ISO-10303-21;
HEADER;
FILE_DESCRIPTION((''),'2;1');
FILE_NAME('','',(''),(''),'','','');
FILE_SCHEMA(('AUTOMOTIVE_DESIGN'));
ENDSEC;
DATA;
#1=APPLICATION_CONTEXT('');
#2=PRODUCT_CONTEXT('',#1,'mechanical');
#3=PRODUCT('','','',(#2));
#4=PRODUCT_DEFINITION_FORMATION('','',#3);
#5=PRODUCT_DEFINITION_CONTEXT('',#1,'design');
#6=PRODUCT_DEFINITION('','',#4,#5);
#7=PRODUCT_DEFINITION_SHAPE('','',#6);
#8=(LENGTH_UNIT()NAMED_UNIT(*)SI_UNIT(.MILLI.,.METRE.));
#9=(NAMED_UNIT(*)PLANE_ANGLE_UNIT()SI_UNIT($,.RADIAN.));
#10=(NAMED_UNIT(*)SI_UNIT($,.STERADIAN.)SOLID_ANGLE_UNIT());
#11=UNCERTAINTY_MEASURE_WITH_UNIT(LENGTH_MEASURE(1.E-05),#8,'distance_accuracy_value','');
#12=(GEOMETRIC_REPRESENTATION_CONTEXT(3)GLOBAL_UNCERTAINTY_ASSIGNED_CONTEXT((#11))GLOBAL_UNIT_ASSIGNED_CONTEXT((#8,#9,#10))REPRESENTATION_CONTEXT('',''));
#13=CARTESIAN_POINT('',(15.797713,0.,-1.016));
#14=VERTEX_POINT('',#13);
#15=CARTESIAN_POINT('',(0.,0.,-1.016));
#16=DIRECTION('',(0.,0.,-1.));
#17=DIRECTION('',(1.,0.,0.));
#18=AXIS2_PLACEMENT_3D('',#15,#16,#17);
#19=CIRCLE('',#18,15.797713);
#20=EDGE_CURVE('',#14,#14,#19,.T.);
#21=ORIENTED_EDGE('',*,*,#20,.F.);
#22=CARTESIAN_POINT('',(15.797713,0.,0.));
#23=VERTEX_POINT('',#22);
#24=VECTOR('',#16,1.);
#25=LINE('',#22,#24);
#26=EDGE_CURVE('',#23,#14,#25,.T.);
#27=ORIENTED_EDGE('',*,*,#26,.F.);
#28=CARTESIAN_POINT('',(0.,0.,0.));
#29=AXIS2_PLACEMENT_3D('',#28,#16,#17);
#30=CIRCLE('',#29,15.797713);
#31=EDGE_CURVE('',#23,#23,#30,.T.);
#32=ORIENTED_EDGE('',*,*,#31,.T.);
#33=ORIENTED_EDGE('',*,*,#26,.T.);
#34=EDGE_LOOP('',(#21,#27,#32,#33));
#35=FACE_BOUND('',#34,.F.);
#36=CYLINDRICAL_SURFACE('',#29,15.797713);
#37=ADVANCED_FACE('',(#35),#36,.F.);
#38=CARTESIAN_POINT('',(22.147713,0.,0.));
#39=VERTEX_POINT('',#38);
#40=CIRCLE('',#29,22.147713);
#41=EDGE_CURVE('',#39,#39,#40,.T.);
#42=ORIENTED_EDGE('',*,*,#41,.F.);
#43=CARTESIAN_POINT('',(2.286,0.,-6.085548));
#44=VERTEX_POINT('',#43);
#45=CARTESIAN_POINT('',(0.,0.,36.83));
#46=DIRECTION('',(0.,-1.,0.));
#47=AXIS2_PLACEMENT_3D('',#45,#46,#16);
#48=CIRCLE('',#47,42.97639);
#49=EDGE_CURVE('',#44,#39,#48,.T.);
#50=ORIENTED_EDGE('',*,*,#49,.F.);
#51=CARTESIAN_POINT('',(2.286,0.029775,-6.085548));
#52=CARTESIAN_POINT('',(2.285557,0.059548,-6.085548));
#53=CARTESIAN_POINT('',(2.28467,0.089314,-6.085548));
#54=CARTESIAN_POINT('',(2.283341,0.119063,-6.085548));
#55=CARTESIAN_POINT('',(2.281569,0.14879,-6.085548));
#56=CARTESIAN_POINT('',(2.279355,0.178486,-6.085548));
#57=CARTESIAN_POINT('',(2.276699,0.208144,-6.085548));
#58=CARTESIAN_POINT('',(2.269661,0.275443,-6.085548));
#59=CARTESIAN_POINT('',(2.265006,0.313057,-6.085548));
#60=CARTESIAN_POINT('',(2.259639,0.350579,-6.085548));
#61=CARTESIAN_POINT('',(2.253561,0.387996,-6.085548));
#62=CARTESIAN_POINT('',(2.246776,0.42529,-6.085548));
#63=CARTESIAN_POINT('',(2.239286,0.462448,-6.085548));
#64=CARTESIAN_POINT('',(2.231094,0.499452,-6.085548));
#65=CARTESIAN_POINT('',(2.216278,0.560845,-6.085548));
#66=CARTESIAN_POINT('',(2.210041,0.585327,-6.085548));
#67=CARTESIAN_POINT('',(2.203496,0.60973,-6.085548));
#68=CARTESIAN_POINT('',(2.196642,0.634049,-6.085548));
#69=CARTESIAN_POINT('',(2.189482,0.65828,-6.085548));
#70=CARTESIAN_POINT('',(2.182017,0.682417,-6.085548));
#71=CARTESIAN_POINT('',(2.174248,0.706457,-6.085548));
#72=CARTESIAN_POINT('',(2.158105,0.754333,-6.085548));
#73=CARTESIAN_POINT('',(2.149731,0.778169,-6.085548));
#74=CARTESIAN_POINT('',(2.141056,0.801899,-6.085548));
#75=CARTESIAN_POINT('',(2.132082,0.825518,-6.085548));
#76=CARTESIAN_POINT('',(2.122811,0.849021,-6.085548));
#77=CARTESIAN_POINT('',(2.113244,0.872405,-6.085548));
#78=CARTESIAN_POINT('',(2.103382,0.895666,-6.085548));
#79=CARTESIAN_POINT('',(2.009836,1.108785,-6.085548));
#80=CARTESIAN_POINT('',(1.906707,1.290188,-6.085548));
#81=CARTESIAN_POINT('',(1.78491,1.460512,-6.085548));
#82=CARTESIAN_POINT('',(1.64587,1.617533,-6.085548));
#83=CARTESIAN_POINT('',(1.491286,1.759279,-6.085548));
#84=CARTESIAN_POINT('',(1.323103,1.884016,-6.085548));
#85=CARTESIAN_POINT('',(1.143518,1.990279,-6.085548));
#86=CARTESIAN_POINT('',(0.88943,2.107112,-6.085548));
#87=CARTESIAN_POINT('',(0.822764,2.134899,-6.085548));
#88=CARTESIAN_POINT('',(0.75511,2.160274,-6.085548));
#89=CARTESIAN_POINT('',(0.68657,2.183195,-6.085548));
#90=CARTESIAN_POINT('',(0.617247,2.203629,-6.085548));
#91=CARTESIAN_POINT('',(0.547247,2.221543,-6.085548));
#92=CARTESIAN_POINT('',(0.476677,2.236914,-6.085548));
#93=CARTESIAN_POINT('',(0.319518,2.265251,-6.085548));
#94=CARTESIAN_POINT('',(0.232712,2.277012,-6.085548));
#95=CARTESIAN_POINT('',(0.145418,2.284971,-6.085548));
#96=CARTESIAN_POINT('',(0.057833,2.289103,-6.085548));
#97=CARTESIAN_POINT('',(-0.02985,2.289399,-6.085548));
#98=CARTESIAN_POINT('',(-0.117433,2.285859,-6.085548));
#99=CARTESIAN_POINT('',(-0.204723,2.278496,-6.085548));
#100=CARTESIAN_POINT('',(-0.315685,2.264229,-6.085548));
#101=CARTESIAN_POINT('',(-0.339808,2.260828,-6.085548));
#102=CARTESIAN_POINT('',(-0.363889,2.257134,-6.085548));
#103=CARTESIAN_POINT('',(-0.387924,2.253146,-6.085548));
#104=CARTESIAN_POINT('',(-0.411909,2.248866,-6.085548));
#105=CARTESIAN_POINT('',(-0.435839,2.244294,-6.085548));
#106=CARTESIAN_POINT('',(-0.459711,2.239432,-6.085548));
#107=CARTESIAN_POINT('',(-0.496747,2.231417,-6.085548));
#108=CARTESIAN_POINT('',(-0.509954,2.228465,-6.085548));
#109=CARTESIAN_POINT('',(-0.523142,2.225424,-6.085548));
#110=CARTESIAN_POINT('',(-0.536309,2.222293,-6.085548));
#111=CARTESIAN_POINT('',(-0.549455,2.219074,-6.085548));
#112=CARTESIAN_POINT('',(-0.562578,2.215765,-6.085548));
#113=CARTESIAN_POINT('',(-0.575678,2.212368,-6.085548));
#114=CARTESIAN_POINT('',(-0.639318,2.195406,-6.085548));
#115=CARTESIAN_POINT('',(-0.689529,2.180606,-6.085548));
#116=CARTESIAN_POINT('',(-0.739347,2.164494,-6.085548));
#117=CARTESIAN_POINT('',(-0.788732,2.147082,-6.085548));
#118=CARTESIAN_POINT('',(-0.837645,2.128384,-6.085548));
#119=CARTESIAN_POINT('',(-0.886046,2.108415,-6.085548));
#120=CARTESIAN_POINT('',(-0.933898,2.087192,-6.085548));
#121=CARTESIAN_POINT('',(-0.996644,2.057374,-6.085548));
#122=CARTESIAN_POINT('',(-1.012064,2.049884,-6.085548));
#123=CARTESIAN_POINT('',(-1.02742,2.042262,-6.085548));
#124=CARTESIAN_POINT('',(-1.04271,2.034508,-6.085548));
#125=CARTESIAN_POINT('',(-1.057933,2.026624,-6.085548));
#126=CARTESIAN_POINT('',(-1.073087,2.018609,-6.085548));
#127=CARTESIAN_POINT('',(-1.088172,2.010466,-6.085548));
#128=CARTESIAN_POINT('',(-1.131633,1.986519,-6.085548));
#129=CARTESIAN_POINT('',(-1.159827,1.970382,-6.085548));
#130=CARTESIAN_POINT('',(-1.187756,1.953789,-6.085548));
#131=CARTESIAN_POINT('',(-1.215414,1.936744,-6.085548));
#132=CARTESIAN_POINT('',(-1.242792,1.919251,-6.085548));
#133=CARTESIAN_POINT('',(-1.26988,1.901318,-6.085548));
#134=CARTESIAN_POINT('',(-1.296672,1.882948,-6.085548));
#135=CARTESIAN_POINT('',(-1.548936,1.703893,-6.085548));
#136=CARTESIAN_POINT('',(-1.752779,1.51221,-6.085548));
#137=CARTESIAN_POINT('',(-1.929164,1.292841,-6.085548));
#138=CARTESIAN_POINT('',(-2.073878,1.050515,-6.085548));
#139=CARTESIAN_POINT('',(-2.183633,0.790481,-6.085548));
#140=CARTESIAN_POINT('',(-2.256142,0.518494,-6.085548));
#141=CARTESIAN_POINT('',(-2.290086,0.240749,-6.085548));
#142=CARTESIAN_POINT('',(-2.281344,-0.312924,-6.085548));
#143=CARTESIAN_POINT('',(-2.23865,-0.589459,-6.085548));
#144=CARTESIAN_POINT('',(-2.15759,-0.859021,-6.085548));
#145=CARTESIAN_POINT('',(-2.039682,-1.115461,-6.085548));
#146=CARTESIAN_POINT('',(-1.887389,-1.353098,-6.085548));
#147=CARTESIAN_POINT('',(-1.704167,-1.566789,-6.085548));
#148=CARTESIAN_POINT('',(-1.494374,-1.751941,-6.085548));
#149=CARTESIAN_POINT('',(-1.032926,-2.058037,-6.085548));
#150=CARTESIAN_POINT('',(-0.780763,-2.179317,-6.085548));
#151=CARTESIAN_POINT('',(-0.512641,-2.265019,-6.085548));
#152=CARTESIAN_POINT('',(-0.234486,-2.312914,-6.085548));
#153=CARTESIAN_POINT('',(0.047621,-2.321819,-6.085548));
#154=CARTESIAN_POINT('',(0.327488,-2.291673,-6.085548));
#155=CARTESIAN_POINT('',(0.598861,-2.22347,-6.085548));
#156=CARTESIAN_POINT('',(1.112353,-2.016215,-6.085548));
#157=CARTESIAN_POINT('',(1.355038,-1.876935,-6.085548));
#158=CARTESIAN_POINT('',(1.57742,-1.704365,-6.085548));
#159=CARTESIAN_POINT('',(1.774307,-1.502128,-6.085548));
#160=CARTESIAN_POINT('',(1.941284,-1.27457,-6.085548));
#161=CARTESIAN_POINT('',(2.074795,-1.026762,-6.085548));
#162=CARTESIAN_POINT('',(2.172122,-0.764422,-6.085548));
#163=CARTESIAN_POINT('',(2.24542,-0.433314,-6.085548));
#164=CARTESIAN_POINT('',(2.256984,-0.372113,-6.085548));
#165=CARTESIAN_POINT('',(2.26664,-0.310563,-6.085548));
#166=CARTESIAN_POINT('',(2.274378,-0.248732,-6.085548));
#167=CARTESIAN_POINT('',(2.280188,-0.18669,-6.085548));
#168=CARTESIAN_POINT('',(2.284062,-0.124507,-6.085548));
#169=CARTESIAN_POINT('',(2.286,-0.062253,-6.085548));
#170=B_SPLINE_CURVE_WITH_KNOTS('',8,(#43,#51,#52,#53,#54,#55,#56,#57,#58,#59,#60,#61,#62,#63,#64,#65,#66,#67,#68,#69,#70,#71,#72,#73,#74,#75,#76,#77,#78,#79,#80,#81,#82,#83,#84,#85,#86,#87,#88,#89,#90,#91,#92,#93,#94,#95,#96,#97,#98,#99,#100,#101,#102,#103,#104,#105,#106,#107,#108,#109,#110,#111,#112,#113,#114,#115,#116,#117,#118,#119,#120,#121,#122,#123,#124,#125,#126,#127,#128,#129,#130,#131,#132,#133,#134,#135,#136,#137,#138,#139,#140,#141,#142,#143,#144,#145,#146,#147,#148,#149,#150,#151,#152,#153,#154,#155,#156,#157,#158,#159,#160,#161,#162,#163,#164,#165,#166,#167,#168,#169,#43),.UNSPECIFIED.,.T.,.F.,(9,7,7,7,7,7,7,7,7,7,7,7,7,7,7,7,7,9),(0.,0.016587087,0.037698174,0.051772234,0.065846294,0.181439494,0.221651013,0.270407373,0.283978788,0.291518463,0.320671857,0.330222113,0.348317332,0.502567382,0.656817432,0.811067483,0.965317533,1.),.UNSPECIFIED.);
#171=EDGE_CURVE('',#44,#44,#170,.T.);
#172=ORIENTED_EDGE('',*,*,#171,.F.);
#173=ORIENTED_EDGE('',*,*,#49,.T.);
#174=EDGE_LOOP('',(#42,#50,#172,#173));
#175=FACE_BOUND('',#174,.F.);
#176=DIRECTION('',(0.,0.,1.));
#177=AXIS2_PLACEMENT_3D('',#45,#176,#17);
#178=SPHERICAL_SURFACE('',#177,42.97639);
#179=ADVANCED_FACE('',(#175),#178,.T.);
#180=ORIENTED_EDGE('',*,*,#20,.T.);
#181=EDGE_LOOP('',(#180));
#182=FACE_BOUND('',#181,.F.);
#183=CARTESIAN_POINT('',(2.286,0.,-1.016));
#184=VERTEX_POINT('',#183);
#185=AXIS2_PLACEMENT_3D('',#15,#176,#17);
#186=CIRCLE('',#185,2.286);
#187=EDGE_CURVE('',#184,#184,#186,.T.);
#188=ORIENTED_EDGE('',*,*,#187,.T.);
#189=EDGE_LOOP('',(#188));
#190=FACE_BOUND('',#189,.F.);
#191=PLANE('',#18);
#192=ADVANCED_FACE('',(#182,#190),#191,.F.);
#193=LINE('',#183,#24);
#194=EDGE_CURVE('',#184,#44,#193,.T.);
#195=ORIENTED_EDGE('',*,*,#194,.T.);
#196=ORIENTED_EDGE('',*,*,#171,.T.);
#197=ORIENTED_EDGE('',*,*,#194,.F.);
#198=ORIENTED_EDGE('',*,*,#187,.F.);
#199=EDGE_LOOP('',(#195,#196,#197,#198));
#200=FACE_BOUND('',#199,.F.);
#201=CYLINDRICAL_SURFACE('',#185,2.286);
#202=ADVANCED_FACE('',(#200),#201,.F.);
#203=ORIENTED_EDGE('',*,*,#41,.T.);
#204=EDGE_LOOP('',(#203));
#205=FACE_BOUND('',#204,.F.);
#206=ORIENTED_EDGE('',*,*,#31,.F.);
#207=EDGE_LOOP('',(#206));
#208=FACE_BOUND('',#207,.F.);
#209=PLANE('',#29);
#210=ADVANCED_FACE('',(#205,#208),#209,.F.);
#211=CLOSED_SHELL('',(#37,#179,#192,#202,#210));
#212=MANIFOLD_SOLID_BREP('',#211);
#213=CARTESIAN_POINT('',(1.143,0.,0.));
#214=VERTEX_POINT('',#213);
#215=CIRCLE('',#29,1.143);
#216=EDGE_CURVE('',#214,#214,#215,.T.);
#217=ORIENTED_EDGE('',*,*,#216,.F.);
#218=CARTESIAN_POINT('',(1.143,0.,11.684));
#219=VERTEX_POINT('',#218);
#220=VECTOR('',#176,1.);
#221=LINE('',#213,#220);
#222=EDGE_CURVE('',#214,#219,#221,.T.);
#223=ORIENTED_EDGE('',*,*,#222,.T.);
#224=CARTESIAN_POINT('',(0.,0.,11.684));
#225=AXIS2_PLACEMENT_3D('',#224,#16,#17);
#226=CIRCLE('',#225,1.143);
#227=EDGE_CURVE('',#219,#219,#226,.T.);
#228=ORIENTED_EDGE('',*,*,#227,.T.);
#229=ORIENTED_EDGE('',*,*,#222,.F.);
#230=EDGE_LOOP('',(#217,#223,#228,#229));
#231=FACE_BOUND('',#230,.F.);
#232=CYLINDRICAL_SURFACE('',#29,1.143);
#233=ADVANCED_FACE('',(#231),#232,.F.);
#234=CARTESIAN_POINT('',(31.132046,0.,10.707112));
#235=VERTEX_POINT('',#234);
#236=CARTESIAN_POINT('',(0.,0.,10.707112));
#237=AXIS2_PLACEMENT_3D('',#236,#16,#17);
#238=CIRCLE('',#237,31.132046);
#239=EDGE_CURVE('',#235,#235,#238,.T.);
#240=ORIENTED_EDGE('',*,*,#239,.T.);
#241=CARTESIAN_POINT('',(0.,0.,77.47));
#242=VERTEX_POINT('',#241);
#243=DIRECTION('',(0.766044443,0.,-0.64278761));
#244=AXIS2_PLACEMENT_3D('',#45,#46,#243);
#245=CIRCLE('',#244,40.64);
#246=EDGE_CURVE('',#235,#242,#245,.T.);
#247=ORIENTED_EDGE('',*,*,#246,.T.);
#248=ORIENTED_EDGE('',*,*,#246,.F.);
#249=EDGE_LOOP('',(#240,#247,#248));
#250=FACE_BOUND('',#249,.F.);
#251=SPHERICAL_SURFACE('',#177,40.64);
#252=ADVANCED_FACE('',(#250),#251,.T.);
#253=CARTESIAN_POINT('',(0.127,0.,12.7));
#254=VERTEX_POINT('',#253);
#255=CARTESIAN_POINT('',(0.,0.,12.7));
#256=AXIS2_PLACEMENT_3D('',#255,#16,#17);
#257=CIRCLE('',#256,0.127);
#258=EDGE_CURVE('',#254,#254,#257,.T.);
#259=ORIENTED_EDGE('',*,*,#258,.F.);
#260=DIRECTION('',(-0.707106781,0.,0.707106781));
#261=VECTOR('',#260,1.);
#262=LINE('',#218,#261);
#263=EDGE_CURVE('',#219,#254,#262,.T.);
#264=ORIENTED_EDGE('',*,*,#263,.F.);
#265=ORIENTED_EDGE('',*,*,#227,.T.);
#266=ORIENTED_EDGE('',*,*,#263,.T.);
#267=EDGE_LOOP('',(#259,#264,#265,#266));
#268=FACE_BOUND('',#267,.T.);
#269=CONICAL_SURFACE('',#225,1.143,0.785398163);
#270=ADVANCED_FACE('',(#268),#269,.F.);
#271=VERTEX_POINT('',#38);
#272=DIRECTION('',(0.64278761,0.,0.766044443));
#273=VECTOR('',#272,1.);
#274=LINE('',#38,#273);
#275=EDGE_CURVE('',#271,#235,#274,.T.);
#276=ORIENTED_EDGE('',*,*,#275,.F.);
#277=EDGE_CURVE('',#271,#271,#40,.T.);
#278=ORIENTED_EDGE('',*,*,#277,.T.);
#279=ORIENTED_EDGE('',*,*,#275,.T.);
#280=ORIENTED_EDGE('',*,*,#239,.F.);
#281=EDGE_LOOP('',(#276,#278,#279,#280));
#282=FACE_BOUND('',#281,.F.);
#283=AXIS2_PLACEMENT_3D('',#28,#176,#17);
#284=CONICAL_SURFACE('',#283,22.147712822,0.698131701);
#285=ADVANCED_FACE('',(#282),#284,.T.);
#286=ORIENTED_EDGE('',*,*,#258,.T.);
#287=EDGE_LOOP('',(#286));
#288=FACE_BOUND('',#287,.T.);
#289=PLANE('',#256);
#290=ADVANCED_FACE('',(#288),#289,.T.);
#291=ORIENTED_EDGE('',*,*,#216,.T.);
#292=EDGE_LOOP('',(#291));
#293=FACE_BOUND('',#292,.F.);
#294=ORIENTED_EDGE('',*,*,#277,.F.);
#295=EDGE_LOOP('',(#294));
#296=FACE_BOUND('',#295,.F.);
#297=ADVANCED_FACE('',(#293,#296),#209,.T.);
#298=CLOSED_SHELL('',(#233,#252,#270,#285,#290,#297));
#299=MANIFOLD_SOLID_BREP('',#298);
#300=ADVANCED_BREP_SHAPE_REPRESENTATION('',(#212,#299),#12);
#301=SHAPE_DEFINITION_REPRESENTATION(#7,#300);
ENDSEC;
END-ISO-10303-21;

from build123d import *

# Parameters (mm, degrees)
F2_R     = 1.143
F3_DEPTH = 12.7
F4_SIZE  = 1.016
F7_R     = 2.286
F8_DEPTH = 25.4


# Not quite as in the source:
# - a feature names something its author has since deleted; it is built from what else it names


with BuildPart() as f1:
    # F0 (on Front) → F1 (revolve)
    with BuildSketch(Plane.XZ):
        with BuildLine():
            Line((22.1477128222, 0), (31.1320461684, 10.7071115423))
            ThreePointArc((31.1320461684, 10.7071115423), (36.8323484652, 54.0052061571), (0, 77.47))
            Line((0, 77.47), (0, 0))
            Line((0, 0), (22.1477128222, 0))
        make_face()
    revolve(axis=Axis((0, 0, -28.7515761617), (0, 0, -1)))

    # F2 (on face) → F3 (cut)
    with BuildSketch(Plane(origin=(0, 0, 0), x_dir=(1, 0, 0), z_dir=(0, 0, -1))):
        Circle(F2_R)
    extrude(amount=-F3_DEPTH, mode=Mode.SUBTRACT)

    # F4
    f4_edges = [f1.edges().sort_by_distance(p)[0] for p in [
        (-1.143, 0, 12.7),
    ]]
    chamfer(f4_edges, length=F4_SIZE)


with BuildPart() as f6:
    # F5 (on Front) → F6 (revolve)
    with BuildSketch(Plane.XZ):
        with BuildLine():
            Line((0, -1.016), (0, -6.1463898351))
            ThreePointArc((0, -6.1463898351), (11.4923810768, -4.5812938755), (22.1477128222, 0))
            Line((22.1477128222, 0), (15.7977128222, 0))
            Line((15.7977128222, 0), (15.7977128222, -1.016))
            Line((15.7977128222, -1.016), (0, -1.016))
        make_face()
    revolve(axis=Axis((0, 0, -28.7515761617), (0, 0, -1)))

    # F7 (on face) → F8 (cut)
    with BuildSketch(Plane.XY.offset(-1.016)):
        Circle(F7_R)
    extrude(amount=-F8_DEPTH, mode=Mode.SUBTRACT)


solid = Compound([f1.part, f6.part])
